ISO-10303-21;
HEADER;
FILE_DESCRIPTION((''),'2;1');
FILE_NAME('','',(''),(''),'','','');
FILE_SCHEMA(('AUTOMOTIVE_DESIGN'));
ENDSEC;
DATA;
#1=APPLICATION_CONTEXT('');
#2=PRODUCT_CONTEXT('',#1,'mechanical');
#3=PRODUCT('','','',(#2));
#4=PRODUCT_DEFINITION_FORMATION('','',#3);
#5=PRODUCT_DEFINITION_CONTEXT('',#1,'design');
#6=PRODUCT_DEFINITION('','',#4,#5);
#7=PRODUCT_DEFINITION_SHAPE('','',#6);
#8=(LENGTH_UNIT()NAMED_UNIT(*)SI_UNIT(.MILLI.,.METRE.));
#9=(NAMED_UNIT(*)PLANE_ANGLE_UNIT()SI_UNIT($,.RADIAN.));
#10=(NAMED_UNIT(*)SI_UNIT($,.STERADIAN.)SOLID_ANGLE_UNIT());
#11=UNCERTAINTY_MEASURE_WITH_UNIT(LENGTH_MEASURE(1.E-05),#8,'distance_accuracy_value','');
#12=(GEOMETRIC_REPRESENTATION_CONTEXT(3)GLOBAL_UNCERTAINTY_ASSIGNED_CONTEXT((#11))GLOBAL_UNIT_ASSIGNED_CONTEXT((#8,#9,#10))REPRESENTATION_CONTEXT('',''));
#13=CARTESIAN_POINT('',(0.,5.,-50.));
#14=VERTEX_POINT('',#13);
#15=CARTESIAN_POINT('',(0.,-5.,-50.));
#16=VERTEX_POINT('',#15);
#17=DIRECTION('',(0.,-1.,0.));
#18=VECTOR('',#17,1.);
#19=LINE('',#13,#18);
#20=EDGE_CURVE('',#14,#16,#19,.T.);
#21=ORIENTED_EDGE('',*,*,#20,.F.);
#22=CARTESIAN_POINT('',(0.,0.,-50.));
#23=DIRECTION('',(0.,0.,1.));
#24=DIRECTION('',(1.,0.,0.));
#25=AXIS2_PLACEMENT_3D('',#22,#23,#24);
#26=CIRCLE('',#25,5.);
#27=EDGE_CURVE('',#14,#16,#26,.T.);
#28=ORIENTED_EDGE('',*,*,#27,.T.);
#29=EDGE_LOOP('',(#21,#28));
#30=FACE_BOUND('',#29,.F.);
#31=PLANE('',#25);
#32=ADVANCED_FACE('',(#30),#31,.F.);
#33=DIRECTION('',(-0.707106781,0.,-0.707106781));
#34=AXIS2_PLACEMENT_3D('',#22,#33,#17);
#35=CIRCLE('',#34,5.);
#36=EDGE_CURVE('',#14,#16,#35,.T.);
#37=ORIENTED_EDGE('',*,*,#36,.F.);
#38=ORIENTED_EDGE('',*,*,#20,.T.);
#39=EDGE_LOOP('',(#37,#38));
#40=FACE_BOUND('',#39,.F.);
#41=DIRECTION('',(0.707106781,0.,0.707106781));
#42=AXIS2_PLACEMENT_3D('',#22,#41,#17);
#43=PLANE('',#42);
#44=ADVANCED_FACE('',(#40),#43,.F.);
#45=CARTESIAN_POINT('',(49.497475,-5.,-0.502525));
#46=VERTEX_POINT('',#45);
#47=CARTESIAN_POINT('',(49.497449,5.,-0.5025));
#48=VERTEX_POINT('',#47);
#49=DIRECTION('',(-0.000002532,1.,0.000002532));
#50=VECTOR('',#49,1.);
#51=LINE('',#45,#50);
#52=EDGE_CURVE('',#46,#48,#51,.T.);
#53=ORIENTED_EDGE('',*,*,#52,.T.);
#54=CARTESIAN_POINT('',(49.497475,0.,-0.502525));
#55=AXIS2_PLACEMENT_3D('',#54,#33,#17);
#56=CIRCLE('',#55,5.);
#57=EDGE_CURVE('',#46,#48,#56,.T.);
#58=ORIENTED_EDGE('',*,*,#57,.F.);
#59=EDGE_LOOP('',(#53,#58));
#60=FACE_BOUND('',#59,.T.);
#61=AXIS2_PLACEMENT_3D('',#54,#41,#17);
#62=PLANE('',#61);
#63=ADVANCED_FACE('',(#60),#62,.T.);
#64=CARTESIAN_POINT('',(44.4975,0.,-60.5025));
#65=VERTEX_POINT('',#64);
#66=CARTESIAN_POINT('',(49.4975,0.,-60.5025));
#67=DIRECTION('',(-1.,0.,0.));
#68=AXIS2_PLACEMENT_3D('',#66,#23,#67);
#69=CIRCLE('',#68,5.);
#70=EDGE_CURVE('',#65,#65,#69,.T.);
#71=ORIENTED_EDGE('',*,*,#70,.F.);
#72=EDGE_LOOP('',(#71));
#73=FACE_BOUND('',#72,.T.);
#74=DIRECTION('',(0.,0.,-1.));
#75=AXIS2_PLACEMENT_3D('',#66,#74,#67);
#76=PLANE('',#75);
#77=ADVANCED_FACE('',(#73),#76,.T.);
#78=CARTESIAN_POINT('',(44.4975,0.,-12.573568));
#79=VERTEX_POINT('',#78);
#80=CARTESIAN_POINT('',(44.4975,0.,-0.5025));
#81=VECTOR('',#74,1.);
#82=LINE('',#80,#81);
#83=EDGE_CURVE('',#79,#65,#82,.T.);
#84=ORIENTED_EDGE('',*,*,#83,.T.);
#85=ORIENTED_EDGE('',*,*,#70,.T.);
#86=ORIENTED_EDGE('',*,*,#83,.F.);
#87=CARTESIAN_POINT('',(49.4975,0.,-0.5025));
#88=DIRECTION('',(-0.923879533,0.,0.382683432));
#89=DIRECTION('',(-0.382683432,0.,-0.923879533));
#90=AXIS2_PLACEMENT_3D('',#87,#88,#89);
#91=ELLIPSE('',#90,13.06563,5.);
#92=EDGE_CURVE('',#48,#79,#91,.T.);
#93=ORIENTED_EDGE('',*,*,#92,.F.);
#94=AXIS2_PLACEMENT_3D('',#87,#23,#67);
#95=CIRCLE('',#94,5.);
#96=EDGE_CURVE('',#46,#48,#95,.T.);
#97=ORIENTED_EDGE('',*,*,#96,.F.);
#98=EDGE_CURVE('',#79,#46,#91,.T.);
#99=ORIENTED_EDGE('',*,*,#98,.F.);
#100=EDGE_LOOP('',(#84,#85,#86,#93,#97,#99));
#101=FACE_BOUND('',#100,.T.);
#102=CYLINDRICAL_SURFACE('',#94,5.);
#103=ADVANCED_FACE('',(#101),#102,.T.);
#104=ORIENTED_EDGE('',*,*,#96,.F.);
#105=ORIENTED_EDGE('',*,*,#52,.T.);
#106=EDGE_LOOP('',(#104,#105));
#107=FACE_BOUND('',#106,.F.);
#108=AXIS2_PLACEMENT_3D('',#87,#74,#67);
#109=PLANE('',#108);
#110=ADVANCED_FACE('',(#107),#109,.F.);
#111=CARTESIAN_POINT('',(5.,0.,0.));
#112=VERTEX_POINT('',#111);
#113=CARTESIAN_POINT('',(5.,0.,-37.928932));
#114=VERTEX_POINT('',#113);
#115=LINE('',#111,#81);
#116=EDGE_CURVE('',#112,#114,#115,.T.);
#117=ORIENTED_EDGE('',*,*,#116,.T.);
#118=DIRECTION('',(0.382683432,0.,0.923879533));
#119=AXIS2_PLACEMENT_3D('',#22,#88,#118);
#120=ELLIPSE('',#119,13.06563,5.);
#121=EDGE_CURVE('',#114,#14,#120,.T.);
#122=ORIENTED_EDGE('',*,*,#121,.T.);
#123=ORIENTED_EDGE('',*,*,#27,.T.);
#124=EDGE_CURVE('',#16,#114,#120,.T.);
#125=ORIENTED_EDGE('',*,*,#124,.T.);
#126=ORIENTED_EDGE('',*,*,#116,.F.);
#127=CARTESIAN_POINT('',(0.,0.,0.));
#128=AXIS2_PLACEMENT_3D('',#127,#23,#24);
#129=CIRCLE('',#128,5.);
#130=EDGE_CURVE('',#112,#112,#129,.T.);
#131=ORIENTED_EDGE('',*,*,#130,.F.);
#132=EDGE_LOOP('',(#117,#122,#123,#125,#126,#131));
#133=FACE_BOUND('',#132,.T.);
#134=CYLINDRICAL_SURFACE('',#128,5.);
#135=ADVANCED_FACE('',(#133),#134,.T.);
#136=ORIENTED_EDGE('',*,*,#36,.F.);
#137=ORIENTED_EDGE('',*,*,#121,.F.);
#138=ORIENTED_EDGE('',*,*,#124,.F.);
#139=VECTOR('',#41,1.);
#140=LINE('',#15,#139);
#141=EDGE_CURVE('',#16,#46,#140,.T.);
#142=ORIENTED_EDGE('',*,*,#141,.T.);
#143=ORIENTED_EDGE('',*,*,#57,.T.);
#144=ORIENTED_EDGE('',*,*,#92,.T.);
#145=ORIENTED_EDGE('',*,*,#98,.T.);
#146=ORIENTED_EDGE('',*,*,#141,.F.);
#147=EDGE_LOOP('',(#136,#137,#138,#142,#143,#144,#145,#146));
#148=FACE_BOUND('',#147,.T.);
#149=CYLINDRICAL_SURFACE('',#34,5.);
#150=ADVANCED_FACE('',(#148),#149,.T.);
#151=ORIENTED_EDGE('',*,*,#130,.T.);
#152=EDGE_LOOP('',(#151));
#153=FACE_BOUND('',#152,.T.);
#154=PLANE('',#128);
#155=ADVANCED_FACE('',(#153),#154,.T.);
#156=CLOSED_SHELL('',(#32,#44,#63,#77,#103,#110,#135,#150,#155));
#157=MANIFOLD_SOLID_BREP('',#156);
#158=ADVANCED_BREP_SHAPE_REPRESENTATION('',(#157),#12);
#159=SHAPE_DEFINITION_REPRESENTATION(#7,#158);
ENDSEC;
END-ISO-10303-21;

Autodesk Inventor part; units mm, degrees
ref_plane "XZ Plane" through (0, 0, 0) normal (0, 1, 0) x (-1, 0, 0)
ref_plane "XY Plane" through (0, 0, 0) normal (0, 0, 1) x (1, 0, 0)
sketch "Sketch1" plane through (0, 0, 0) normal (0, 0, 1) x (1, 0, 0)
  circle A0 centre (0, 0) radius 5
  dimension "d0" = 10
extrude "Extrusion1" add sketch "Sketch1" against normal blind 50
ref_plane "Work Plane1" through (0, 0, -50) normal (0, 0, -1) x (-1, 0, 0)
ref_plane "Work Plane3" through (0, 0, -50) normal (0.7071068, 0, 0.7071068) x (0, -1, 0)
ref_plane "Work Plane2" through (0, 0, -50) normal (1, 0, 0) x (0, 1, 0)
sketch "Sketch2" plane through (0, 0, -50) normal (0.7071068, 0, 0.7071068) x (0, -1, 0)
  ellipse E0 centre (0, 0) end of major axis (-5, 0) minor radius 3.5355 projected
  circle A0 centre (0, 0) radius 5
  point P0 (0, -35.3553)
  dimension "d14" = 10
extrude "Extrusion2" add sketch "Sketch2" along normal blind 70
ref_plane "Work Plane4" through (49.4975, 0, -0.5025) normal (0, 0, -1) x (-1, 0, 0)
sketch "Sketch3" plane through (49.4975, 0, -0.5025) normal (0, 0, -1) x (-1, 0, 0)
  ellipse E0 centre (0, 0) end of major axis (0, 5) minor radius 3.5355 projected
  circle A0 centre (0, 0) radius 5
  point P0 (49.4975, 0)
extrude "Extrusion3" add sketch "Sketch3" along normal blind 60
ref_plane "Work Plane5" through (0, 0, -50) normal (0.3826834, 0, 0.9238795) x (0, -1, 0)
sketch "Sketch4" plane through (0, 0, -50) normal (0.3826834, 0, 0.9238795) x (0, -1, 0)
  circle A0 centre (0, 0) radius 2.8545
  point P0 (0, -19.1342)
extrude "Extrusion4" add sketch "Sketch4" along normal blind 1
ref_plane "Work Plane8" through (49.4975, 0, -0.5025) normal (0.3826834, 0, 0.9238795) x (0, 1, 0)
sketch "Sketch5" plane through (49.4975, 0, -0.5025) normal (0.3826834, 0, 0.9238795) x (0, 1, 0)
  circle A0 centre (0, 0) radius 2.6859
  point P0 (0, 45.922)
extrude "Extrusion5" add sketch "Sketch5" against normal blind 1
ref_plane "Work Plane7" through (49.4975, 0, -35.0025) normal (0, 0, -1) x (-1, 0, 0)
sketch "Sketch6" plane through (49.4975, 0, -35.0025) normal (0, 0, -1) x (-1, 0, 0)
  ellipse E0 centre (0, 0) end of major axis (0, -2.6859) minor radius 2.4814 projected
  line L0 (-2.1727, -1.2973) -> (2.1727, -1.2973)
  line L1 (2.1727, -1.2973) -> (2.1727, 1.2973)
  line L2 (2.1727, 1.2973) -> (-2.1727, 1.2973)
  line L3 (-2.1727, 1.2973) -> (-2.1727, -1.2973)
  line L4 (0, -5) -> (0, 5) projected
  line L5 (-2.1727, -1.2973) -> (2.1727, 1.2973) construction
  line L6 (2.1727, -1.2973) -> (-2.1727, 1.2973) construction
  point P0 (49.4975, 0)
  point P1 (0, 0)
extrude "Extrusion6" add sketch "Sketch6" along normal blind 1 contours L0 L4 L2 L1 | L3 L2 L4 L0
properties part number "00_Beam_Ocular_Detectoin"
